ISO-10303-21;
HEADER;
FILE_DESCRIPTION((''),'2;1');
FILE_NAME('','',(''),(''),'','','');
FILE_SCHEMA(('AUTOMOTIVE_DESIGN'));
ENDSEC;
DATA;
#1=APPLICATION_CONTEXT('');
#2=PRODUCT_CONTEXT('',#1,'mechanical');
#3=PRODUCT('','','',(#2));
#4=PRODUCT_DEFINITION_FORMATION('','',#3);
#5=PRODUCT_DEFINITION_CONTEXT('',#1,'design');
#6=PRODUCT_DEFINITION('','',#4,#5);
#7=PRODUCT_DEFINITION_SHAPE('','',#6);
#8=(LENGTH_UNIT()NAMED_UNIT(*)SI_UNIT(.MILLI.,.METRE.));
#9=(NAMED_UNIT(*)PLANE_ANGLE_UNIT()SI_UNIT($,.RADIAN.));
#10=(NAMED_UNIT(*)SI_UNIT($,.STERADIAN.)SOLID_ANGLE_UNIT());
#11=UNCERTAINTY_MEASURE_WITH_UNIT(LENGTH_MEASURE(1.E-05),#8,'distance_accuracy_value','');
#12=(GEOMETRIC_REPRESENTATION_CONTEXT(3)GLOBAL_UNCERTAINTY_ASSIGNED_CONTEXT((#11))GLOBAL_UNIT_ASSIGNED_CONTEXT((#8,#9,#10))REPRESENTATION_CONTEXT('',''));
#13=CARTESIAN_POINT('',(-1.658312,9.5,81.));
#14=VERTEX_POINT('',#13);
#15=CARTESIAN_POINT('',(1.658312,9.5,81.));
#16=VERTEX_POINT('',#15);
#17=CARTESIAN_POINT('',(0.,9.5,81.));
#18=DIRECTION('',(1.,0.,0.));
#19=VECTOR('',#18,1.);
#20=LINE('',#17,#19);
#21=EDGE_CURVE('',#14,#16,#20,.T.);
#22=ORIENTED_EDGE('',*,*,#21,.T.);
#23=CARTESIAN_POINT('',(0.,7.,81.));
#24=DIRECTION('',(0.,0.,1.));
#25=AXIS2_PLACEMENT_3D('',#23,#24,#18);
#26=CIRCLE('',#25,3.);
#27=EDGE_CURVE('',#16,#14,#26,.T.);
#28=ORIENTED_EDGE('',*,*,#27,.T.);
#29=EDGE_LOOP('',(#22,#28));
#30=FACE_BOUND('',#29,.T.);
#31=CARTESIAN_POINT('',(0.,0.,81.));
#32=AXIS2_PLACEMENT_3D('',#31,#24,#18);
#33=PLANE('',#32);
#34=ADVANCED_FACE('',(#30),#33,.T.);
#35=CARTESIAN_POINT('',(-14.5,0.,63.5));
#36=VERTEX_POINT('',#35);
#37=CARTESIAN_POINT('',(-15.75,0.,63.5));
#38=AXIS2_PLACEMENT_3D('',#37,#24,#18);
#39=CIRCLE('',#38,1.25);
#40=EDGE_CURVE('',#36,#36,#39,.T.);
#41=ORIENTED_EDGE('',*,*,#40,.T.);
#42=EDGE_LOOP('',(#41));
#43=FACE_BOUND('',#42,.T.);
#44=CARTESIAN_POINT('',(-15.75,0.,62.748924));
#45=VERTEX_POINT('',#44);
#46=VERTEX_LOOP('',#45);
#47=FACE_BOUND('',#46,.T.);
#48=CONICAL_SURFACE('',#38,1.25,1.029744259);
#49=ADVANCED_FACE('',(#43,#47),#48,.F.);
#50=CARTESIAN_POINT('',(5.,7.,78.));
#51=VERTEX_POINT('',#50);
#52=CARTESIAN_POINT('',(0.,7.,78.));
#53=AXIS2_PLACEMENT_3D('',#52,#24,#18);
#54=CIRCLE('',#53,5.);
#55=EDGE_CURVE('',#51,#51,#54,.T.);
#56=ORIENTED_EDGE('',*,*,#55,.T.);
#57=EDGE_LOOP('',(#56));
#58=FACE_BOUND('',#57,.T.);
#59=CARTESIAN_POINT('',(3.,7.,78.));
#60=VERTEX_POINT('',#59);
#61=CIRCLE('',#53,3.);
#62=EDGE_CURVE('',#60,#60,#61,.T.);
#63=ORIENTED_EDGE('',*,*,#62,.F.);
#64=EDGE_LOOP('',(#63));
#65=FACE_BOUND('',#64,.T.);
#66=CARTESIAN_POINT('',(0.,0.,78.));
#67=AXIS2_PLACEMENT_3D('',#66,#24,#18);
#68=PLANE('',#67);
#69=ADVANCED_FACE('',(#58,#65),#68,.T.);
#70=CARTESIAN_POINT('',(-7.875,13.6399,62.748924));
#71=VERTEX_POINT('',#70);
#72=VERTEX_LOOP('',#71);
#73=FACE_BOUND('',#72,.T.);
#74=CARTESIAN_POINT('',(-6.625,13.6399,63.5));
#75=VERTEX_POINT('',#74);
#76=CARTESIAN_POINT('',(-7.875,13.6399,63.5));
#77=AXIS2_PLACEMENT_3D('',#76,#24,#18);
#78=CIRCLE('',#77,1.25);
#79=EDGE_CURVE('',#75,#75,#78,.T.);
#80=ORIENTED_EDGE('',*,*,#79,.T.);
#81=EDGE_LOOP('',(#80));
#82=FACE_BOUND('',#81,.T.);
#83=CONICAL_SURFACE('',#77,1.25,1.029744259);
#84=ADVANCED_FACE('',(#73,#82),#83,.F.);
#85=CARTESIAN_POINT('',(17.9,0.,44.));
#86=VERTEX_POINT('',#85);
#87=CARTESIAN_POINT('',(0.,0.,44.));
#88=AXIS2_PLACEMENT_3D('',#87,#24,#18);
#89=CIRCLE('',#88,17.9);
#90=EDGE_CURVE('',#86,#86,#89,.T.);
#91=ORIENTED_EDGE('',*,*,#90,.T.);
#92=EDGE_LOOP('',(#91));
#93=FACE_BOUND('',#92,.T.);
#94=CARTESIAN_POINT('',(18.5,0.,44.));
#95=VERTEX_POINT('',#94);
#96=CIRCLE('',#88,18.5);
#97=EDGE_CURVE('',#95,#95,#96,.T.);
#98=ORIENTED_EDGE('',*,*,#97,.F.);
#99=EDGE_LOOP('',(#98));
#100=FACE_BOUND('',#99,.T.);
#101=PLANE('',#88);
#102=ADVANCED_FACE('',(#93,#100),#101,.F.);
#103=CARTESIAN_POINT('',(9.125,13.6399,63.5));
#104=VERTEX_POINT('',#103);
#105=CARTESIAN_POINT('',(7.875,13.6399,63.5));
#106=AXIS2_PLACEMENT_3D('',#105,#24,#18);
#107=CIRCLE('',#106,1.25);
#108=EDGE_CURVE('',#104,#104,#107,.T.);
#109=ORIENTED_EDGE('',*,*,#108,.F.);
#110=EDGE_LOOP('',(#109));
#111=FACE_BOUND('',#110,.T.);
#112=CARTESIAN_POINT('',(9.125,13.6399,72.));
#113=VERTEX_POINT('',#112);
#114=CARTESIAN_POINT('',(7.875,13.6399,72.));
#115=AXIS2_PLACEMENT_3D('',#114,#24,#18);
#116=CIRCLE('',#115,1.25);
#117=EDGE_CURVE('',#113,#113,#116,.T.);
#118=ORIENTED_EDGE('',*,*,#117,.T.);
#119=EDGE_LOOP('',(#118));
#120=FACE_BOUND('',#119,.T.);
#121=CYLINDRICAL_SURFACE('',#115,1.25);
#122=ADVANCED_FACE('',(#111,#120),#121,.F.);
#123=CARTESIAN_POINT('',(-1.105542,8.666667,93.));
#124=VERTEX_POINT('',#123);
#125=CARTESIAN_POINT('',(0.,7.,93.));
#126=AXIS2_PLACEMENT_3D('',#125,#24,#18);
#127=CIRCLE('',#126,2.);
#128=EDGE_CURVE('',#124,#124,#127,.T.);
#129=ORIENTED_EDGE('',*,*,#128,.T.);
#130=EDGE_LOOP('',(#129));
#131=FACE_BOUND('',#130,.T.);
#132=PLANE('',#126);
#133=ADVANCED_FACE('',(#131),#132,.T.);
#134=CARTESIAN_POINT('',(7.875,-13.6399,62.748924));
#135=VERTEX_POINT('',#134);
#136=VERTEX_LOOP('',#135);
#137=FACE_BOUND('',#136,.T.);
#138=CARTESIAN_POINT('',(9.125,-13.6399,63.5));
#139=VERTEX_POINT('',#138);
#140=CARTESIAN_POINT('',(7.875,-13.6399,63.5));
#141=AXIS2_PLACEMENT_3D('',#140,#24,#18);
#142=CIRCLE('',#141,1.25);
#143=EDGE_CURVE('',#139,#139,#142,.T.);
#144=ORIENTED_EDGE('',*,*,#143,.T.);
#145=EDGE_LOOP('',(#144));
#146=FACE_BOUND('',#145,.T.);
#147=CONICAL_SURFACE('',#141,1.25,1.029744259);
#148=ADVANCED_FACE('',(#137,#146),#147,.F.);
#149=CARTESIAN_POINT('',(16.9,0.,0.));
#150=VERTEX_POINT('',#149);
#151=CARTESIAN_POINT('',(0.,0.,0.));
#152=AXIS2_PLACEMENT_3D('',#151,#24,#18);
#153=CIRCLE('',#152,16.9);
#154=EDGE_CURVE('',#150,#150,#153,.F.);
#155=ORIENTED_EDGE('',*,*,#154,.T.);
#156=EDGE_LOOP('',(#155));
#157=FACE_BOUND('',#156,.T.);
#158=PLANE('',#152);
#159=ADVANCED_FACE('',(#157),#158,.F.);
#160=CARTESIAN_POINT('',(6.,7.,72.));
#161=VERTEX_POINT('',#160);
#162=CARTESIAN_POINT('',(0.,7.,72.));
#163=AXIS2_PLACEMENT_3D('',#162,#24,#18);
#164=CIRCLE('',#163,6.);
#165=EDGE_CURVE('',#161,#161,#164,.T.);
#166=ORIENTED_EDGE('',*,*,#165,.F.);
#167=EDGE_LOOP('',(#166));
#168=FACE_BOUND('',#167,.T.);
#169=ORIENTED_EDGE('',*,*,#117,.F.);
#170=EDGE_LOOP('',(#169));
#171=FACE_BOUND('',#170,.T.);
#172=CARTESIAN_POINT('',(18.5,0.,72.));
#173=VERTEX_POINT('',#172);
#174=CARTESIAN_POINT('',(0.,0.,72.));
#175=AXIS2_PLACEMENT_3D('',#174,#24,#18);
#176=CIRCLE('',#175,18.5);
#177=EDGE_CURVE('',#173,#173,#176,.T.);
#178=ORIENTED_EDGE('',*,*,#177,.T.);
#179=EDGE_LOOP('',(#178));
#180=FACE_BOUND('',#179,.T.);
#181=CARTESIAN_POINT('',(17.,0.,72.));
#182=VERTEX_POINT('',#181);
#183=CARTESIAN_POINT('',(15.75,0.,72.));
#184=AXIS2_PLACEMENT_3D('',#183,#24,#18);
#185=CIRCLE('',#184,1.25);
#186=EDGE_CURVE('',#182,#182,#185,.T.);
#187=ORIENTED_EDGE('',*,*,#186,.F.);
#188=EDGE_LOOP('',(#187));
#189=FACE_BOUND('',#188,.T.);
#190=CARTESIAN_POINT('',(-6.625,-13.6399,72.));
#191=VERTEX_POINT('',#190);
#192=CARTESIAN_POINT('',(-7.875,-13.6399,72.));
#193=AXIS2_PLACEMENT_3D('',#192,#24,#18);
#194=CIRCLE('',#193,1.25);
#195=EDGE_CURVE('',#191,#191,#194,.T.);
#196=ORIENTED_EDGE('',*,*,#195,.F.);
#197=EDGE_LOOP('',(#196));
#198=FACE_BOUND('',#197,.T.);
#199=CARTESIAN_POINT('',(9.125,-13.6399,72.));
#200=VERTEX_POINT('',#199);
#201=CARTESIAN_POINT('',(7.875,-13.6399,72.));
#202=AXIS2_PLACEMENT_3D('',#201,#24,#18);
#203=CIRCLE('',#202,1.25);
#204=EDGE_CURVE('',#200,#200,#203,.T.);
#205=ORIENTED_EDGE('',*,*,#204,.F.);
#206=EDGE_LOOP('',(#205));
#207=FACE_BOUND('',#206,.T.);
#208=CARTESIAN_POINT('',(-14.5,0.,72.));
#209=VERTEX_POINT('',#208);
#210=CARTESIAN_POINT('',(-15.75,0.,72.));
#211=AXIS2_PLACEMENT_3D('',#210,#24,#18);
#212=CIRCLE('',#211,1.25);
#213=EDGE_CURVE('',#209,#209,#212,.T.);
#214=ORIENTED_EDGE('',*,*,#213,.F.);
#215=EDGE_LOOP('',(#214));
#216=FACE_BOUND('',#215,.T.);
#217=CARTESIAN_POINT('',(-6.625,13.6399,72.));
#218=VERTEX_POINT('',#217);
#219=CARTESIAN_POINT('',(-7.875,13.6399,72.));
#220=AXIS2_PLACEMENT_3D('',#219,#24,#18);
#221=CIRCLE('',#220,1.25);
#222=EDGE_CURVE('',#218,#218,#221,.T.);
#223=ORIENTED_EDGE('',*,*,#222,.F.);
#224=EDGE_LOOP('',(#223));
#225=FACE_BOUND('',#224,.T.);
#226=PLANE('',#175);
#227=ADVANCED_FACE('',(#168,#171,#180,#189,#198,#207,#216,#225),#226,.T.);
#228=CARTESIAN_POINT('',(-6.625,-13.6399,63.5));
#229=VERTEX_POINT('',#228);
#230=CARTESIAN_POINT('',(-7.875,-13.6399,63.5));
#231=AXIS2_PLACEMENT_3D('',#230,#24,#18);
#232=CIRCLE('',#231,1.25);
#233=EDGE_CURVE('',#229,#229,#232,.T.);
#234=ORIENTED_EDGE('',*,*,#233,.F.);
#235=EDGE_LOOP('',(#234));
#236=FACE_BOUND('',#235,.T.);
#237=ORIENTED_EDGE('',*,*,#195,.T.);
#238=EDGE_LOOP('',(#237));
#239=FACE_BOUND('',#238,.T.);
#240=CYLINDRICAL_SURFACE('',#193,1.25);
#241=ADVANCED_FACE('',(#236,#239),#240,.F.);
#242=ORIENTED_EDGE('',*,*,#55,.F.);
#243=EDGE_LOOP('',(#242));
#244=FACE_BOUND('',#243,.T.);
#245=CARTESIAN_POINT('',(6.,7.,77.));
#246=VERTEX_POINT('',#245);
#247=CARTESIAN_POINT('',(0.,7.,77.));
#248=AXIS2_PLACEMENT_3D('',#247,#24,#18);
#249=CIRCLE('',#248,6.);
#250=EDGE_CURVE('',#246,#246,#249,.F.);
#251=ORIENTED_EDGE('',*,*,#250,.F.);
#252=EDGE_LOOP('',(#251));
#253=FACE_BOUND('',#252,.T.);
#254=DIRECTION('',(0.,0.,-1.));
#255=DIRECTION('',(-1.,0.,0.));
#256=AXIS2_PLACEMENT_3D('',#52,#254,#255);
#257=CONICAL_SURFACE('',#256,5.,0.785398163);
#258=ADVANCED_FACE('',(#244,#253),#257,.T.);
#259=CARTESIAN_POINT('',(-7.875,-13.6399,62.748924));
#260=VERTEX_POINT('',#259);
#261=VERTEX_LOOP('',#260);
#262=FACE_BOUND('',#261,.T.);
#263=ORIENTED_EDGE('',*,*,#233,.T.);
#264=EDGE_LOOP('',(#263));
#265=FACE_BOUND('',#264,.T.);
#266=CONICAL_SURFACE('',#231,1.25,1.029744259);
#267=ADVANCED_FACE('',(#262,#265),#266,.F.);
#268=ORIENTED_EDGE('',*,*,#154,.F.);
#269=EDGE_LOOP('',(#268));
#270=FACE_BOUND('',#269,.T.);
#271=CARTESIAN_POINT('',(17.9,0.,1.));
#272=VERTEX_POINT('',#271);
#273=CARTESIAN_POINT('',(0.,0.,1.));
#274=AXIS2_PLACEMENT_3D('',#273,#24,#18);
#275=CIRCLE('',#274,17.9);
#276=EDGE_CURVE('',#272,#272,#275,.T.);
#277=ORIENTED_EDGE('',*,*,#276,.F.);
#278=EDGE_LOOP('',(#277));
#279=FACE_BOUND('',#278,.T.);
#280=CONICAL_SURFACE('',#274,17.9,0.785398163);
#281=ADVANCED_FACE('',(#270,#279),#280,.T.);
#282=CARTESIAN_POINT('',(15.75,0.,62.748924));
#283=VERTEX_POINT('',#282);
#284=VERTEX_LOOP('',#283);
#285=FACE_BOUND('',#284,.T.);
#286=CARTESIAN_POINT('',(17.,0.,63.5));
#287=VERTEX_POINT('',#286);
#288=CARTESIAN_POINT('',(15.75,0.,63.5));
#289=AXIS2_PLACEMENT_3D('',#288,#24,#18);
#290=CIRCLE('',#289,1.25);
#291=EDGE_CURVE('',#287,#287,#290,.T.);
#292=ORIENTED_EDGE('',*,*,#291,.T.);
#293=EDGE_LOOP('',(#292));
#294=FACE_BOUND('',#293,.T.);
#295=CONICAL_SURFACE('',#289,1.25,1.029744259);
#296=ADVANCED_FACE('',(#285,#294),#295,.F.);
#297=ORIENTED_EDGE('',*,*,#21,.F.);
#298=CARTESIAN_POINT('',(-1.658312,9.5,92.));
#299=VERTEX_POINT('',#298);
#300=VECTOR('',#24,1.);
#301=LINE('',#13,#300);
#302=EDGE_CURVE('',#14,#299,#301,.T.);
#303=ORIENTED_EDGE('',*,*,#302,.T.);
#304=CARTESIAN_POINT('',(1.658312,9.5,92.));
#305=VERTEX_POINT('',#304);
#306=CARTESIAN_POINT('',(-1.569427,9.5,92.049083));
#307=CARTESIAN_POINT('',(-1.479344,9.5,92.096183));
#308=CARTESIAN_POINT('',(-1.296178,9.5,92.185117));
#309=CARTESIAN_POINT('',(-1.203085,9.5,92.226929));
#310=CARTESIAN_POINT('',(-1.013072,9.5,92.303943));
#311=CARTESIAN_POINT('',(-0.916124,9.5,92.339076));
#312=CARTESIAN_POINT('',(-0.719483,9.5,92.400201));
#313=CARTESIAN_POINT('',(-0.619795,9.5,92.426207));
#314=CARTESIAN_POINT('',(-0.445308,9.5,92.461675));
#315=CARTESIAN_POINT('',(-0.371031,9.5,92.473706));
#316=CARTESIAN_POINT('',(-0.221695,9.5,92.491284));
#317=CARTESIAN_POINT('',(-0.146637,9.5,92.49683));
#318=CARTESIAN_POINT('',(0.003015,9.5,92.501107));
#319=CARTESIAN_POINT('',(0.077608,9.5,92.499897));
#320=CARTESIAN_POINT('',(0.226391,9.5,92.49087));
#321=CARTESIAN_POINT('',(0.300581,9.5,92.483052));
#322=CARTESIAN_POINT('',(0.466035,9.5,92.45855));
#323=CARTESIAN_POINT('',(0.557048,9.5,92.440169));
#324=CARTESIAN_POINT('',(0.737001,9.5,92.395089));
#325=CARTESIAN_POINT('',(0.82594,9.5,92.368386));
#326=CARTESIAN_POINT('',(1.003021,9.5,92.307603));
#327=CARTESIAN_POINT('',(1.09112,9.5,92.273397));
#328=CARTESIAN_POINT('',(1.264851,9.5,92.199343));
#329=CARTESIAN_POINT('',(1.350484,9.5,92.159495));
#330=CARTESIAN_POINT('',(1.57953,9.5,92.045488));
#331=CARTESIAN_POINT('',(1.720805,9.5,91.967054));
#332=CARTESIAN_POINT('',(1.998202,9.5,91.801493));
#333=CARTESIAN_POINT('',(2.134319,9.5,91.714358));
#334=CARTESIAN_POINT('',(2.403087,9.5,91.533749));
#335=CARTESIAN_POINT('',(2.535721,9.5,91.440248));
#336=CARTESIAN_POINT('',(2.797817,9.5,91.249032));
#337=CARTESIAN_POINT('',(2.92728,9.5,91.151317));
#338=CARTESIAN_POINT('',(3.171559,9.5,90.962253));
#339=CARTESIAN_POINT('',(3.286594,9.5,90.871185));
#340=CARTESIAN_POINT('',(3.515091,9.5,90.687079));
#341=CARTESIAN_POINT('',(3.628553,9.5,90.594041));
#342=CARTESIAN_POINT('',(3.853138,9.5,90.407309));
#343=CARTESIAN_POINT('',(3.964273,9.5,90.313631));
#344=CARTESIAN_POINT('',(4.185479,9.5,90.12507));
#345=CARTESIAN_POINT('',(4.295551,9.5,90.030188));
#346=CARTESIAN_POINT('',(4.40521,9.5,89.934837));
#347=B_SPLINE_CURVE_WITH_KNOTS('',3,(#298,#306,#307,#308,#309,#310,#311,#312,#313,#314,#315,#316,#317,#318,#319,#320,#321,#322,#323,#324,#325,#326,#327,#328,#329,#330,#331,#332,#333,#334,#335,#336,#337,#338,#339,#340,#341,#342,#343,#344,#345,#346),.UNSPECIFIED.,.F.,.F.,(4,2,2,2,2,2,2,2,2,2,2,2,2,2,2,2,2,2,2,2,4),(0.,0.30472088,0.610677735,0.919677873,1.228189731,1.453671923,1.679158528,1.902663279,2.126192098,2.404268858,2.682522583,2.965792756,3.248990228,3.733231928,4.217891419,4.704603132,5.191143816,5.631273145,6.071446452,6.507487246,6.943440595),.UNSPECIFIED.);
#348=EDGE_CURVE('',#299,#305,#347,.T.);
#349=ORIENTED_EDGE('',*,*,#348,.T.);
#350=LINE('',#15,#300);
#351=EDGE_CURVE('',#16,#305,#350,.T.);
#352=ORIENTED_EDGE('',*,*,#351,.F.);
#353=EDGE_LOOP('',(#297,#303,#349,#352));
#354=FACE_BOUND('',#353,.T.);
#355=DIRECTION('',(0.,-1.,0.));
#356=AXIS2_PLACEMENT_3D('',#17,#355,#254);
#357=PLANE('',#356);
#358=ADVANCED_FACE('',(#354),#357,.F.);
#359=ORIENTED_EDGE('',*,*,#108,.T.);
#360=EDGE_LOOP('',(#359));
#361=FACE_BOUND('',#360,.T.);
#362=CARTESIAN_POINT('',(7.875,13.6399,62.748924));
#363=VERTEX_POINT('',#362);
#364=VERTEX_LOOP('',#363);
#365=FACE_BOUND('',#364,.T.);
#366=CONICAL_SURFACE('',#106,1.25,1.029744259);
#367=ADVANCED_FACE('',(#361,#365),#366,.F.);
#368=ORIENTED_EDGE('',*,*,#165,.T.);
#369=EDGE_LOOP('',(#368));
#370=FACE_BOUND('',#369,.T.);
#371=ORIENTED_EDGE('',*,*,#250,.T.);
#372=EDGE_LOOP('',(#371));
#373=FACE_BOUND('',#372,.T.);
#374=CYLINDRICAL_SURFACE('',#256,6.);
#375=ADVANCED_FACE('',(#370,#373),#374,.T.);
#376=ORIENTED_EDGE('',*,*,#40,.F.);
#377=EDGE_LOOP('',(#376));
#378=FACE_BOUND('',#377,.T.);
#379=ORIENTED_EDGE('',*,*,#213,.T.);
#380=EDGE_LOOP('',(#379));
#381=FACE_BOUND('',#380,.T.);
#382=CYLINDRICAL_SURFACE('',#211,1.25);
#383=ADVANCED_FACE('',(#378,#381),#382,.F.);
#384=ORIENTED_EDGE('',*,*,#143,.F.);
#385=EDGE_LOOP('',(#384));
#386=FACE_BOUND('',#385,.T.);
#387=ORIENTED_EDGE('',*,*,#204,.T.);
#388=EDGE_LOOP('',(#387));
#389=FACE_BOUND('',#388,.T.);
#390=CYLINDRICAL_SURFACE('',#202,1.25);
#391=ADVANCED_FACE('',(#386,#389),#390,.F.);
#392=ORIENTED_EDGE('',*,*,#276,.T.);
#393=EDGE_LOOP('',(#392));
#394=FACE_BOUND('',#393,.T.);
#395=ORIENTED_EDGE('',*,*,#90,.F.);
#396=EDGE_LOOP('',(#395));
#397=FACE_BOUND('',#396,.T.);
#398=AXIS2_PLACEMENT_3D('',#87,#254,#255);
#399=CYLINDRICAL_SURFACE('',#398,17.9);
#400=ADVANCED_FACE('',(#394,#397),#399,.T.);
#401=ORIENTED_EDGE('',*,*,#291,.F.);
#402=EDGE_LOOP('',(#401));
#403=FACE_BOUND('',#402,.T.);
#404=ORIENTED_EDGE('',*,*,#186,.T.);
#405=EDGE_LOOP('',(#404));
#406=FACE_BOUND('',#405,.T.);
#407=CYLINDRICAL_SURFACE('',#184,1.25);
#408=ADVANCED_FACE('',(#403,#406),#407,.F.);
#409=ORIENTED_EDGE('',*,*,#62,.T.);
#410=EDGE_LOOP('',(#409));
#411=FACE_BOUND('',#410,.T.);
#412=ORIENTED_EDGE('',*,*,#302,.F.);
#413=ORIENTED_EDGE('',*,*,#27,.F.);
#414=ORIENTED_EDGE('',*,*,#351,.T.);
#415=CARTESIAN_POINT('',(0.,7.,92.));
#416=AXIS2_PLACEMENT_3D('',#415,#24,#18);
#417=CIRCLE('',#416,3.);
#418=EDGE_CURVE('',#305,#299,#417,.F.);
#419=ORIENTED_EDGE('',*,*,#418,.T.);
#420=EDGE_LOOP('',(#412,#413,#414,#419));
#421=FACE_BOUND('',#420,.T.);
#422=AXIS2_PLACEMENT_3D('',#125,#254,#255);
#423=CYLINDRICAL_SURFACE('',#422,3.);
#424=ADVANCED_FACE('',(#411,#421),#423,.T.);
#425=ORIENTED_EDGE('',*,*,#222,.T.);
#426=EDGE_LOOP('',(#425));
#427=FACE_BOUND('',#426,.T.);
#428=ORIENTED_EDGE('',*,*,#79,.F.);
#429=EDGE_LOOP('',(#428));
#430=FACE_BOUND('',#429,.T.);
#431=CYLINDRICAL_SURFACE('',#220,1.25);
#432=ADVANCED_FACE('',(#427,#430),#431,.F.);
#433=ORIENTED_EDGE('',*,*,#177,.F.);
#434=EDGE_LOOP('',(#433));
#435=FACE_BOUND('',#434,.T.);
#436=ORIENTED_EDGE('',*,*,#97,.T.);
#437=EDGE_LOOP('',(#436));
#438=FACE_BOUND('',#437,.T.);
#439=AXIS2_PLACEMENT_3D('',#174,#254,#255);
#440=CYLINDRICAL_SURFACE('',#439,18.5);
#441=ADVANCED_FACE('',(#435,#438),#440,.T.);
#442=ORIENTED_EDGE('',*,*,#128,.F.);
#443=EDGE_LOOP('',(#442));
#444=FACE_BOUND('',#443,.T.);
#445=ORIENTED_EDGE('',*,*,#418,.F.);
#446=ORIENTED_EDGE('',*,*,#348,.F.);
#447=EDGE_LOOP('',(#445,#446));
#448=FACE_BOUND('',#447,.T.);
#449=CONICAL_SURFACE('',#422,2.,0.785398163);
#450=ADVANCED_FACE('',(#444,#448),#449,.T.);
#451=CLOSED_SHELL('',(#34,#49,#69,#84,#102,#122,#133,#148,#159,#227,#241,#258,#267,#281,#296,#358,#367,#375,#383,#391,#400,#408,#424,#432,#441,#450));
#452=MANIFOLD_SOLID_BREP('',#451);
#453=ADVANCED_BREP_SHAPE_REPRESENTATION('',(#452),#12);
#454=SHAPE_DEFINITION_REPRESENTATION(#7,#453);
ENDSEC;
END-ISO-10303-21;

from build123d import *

# Parameters (mm, degrees)
SKETCH_1_R          = 17.9
EXTRUDE_1_DEPTH     = 44
SKETCH_2_R          = 18.5
EXTRUDE_2_DEPTH     = 28
SKETCH_3_R          = 6
EXTRUDE_3_DEPTH     = 6
SKETCH_4_R          = 3
EXTRUDE_4_DEPTH     = 15
CUT_EXTRUDE_START   = -12
CUT_EXTRUDE_1_DEPTH = 12
M3X0_5_1_D          = 2.5
M3X0_5_1_DEPTH      = 8.5
M3X0_5_1_TIP        = 0.751075774
CHAMFER_1_SIZE      = 1
CHAMFER_2_SIZE      = 1
CHAMFER_3_SIZE      = 1


with BuildPart() as part:
    # ｽｹｯﾁ1 → ﾎﾞｽ - 押し出し1 (new body)
    with BuildSketch(Plane.XY):
        Circle(SKETCH_1_R)
    extrude(amount=EXTRUDE_1_DEPTH)

    # ｽｹｯﾁ2 → ﾎﾞｽ - 押し出し2 (add)
    with BuildSketch(Plane.XY.offset(44)):
        Circle(SKETCH_2_R)
    extrude(amount=EXTRUDE_2_DEPTH)

    # ｽｹｯﾁ3 → ﾎﾞｽ - 押し出し3 (add)
    with BuildSketch(Plane.XY.offset(72)):
        with Locations((0, 7)):
            Circle(SKETCH_3_R)
    extrude(amount=EXTRUDE_3_DEPTH)

    # ｽｹｯﾁ4 → ﾎﾞｽ - 押し出し4 (add)
    with BuildSketch(Plane.XY.offset(78)):
        with Locations((0, 7)):
            Circle(SKETCH_4_R)
    extrude(amount=EXTRUDE_4_DEPTH)

    # ｽｹｯﾁ5 → ｶｯﾄ - 押し出し1 (cut)
    with BuildSketch(Plane.XY.offset(93).offset(CUT_EXTRUDE_START)):
        with BuildLine():
            ThreePointArc((1.658312395, 9.5), (0, 10), (-1.658312395, 9.5))
            Line((-1.658312395, 9.5), (0, 9.5))
            Line((0, 9.5), (1.658312395, 9.5))
        make_face()
    extrude(amount=CUT_EXTRUDE_1_DEPTH, mode=Mode.SUBTRACT)

    # M3x0.5 ねじ穴1
    with Locations(Plane(origin=(-15.75, 0, 72), x_dir=(1, 0, 0), z_dir=(0, 0, 1))):
        with Locations((0, 0), (7.875, -13.63990011), (23.625, -13.63990011), (31.5, 0), (23.625, 13.63990011), (7.875, 13.63990011)):
            Hole(M3X0_5_1_D / 2, depth=M3X0_5_1_DEPTH)
            with Locations((0, 0, -(M3X0_5_1_DEPTH + M3X0_5_1_TIP / 2))):  # 118° drill point
                Cone(0, M3X0_5_1_D / 2, M3X0_5_1_TIP, mode=Mode.SUBTRACT)

    # 面取り1
    # the kernel refuses this chamfer: 1 mm, written as the material it takes off along each edge
    with BuildSketch(Plane(origin=(0, 7, 93), x_dir=(0.27051002147704706, 0.9627171590246472, 0), z_dir=(0.9627171590246472, -0.27051002147704706, 0))) as chamfer_1_piece_1:
        Polygon((3, -CHAMFER_1_SIZE), (3 - CHAMFER_1_SIZE, 0), (3, 0), align=None)
    revolve(axis=Axis((0, 7, 93), (0, 0, 1)), revolution_arc=285.694618346, mode=Mode.SUBTRACT)
    with BuildSketch(Plane(origin=(0, 7, 93), x_dir=(1, 0, 0), z_dir=(0, -1, 0))) as chamfer_1_piece_2:
        Polygon((3, -CHAMFER_1_SIZE), (3 - CHAMFER_1_SIZE, 0), (3, 0), align=None)
    revolve(axis=Axis((0, 7, 93), (0, 0, 1)), revolution_arc=105.565976033, mode=Mode.SUBTRACT)

    # 面取り2
    chamfer_2_edges = [part.edges().sort_by_distance(p)[0] for p in [
        (-6, 7, 78),
    ]]
    chamfer(chamfer_2_edges, length=CHAMFER_2_SIZE)

    # 面取り3
    chamfer_3_edges = [part.edges().sort_by_distance(p)[0] for p in [
        (-17.9, 0, 0),
    ]]
    chamfer(chamfer_3_edges, length=CHAMFER_3_SIZE)


solid = part.part
